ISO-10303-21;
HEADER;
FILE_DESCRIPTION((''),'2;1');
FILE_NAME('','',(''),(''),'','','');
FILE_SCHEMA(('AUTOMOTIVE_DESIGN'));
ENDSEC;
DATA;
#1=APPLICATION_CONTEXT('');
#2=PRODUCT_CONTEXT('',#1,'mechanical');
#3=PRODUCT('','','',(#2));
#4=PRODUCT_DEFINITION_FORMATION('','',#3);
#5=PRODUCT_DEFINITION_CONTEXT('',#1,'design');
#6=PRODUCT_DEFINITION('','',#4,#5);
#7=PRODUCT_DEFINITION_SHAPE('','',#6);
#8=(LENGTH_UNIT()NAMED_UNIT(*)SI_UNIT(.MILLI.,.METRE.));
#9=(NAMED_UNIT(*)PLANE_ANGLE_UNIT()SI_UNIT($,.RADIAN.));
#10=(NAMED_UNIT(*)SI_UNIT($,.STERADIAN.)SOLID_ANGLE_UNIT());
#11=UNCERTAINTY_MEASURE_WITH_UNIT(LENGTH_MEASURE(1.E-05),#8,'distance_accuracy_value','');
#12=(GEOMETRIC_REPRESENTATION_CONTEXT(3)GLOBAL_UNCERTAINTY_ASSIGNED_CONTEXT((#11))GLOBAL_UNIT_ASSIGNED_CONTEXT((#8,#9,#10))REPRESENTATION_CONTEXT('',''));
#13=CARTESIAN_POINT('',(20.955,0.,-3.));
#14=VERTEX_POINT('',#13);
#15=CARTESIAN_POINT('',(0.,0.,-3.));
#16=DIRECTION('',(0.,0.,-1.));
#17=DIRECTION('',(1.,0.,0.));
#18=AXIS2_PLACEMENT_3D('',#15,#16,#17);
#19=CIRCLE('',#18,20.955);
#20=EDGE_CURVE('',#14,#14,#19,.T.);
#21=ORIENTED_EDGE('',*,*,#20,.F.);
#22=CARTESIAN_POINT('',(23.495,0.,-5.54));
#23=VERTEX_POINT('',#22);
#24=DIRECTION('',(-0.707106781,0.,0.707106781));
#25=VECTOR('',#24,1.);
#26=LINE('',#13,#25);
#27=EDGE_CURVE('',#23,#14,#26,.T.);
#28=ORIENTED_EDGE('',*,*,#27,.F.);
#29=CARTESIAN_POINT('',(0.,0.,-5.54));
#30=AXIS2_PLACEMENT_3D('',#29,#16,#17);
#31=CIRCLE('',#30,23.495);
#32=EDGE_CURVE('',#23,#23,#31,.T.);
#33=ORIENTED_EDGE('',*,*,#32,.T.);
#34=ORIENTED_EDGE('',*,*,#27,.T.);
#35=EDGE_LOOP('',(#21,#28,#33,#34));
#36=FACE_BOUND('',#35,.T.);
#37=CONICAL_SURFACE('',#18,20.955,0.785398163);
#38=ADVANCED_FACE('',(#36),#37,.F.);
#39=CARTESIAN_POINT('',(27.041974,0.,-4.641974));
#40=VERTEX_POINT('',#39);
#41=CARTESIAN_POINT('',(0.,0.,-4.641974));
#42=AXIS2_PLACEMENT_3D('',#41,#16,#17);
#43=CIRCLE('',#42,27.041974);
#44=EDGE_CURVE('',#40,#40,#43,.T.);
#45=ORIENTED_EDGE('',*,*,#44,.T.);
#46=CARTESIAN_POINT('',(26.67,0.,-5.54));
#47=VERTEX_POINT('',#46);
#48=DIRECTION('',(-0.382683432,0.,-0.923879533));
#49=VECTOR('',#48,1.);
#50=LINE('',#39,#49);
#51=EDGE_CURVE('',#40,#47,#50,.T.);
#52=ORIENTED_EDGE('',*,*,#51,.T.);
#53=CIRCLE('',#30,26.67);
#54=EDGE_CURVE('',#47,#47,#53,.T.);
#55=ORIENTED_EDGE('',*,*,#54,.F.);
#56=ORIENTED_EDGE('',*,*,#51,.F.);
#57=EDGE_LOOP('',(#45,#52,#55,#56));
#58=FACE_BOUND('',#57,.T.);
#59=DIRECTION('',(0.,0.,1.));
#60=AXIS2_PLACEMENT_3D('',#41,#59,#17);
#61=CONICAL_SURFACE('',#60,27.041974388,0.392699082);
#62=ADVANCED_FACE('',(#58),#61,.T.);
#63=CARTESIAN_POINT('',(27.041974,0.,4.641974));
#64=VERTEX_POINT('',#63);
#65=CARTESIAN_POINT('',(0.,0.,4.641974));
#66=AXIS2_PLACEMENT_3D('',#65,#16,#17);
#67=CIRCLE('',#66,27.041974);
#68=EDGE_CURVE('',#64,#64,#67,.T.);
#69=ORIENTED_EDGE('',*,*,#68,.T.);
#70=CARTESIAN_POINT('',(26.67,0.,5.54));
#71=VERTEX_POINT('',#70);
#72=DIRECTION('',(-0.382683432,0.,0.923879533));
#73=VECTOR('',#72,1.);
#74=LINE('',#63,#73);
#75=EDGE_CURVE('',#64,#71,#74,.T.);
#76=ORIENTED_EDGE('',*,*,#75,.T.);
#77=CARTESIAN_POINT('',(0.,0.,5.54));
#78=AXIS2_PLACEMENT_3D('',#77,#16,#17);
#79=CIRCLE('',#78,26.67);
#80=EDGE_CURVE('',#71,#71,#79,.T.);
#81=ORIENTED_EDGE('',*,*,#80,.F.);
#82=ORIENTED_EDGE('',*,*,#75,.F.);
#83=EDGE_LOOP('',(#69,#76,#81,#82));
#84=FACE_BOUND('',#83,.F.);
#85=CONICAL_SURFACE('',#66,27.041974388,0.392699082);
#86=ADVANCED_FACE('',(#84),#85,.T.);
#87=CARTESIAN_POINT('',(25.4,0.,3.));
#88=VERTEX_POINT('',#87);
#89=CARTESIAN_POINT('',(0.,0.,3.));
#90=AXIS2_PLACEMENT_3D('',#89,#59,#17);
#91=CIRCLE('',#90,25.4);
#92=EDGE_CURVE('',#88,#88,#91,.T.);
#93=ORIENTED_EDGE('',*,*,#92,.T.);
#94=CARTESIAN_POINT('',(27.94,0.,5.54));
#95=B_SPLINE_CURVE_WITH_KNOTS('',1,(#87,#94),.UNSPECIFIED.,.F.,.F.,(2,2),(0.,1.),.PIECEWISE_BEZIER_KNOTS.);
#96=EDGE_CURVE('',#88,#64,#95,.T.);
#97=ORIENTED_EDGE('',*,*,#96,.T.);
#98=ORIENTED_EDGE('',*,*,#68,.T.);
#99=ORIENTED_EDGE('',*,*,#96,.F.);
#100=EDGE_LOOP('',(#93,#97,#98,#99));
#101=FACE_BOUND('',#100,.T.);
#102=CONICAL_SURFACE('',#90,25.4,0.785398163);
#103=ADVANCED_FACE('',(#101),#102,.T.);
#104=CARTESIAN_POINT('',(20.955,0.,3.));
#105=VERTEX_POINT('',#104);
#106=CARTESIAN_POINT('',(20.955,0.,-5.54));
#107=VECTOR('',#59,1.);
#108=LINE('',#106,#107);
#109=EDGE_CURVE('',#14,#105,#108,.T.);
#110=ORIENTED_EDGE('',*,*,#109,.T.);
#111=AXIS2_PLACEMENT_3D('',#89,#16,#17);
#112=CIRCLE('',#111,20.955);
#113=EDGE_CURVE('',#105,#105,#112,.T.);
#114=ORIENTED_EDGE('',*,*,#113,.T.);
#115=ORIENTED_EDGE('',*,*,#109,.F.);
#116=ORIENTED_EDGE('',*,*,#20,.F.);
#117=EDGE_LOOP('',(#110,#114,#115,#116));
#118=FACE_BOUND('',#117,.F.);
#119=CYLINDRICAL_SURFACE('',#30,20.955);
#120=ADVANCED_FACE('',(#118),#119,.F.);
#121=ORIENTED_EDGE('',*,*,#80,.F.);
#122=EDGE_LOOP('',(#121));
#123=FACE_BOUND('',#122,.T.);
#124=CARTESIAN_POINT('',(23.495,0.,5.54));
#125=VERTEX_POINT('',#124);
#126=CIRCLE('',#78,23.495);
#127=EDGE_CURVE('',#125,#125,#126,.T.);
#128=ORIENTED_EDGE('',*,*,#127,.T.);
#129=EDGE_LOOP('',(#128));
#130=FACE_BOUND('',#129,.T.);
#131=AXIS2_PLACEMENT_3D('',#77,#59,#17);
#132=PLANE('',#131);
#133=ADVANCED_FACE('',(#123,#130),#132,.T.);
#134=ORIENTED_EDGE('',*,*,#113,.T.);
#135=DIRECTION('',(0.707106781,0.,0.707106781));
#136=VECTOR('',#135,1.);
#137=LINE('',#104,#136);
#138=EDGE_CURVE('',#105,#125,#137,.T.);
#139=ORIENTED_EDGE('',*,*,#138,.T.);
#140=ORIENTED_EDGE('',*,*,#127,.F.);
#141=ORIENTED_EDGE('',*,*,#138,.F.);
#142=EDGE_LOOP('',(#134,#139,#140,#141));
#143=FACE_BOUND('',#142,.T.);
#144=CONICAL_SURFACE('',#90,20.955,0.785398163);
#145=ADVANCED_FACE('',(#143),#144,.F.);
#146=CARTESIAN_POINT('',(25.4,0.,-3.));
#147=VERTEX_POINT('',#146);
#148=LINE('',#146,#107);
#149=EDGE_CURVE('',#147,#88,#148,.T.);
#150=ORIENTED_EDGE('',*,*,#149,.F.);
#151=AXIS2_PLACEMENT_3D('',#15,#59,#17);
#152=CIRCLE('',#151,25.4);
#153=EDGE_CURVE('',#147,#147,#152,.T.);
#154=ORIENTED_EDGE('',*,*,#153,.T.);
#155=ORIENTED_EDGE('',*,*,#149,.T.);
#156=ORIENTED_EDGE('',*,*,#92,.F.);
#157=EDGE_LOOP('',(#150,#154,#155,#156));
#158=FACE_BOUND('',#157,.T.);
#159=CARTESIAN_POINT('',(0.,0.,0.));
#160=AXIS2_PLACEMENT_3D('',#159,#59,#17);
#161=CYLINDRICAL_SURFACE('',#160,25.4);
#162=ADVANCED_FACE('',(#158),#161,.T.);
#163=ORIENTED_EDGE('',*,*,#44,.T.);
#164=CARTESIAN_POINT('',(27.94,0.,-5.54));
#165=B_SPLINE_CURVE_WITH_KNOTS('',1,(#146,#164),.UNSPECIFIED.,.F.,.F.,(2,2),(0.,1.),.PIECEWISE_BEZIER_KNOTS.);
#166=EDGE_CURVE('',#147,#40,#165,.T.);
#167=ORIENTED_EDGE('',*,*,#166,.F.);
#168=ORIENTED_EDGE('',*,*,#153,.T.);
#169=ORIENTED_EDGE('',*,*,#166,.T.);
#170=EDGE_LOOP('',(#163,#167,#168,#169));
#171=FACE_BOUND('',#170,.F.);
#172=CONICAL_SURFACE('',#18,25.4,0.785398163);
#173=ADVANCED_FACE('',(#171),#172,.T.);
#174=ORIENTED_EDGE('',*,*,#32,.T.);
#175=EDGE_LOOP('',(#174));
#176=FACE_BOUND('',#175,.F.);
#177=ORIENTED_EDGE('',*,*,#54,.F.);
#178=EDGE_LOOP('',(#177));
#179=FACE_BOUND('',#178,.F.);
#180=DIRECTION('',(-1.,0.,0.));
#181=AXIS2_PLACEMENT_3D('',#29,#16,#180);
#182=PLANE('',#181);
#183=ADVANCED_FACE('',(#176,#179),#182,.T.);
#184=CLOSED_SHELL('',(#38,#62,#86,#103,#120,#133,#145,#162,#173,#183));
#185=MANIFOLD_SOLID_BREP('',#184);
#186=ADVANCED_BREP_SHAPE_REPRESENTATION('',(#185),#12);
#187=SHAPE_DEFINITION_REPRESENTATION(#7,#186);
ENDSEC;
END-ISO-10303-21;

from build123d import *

# Parameters (mm, degrees)
F0_R      = 25.4
F1_DEPTH  = 3
F1_FACE_R = 25.4
F2_DEPTH  = 2.54
F2_TAPER  = -45
F5_R      = 20.955
F6_DEPTH  = 11.081
F7_SIZE   = 2.54


# Not quite as in the source:
# - a fillet or chamfer that OpenCascade refuses, or shapes differently, is made with other operations: its cross-section is extruded or revolved along the edge and cut away or added


with BuildPart() as f1:
    # F0 (on Top) → F1 (new body)
    with BuildSketch(Plane.XY):
        Circle(F0_R)
    extrude(amount=F1_DEPTH)

    # F1_face (on face) → F2 (join)
    with BuildSketch(Plane.XY.offset(3)):
        Circle(F1_FACE_R)
    extrude(amount=F2_DEPTH, taper=F2_TAPER)

    # F3: F1 across plane


with BuildPart() as f1_1:
    add(f1.part)
    add(f1.part.mirror(Plane.XY))

    # F4: chamfer of 1.27 on 2 edges, made by hand

    # F4_s1 → F4_t2 (revolve, cut)
    with BuildSketch(Plane.XZ):
        Polygon((27.0419743879, 4.6419743879), (26.67, 5.54), (27.94, 5.54), align=None)
    revolve(axis=Axis((0, 0, 5.54), (0, 0, -1)), mode=Mode.SUBTRACT)

    # F4_s3 → F4_t4 (revolve, cut)
    with BuildSketch(Plane.XZ):
        Polygon((27.0419743879, -4.6419743879), (26.67, -5.54), (27.94, -5.54), align=None)
    revolve(axis=Axis((0, 0, -5.54), (0, 0, -1)), mode=Mode.SUBTRACT)

    # F5 (on face) → F6 (cut, through all)
    with BuildSketch(Plane(origin=(0, 0, -5.54), x_dir=(1, 0, 0), z_dir=(0, 0, -1))):
        Circle(F5_R)
    extrude(amount=-F6_DEPTH, mode=Mode.SUBTRACT)

    # F7
    f7_edges = [f1_1.edges().sort_by_distance(p)[0] for p in [
        (-20.955, 0, 5.54),
        (-20.955, 0, -5.54),
    ]]
    chamfer(f7_edges, length=F7_SIZE)


solid = f1_1.part
